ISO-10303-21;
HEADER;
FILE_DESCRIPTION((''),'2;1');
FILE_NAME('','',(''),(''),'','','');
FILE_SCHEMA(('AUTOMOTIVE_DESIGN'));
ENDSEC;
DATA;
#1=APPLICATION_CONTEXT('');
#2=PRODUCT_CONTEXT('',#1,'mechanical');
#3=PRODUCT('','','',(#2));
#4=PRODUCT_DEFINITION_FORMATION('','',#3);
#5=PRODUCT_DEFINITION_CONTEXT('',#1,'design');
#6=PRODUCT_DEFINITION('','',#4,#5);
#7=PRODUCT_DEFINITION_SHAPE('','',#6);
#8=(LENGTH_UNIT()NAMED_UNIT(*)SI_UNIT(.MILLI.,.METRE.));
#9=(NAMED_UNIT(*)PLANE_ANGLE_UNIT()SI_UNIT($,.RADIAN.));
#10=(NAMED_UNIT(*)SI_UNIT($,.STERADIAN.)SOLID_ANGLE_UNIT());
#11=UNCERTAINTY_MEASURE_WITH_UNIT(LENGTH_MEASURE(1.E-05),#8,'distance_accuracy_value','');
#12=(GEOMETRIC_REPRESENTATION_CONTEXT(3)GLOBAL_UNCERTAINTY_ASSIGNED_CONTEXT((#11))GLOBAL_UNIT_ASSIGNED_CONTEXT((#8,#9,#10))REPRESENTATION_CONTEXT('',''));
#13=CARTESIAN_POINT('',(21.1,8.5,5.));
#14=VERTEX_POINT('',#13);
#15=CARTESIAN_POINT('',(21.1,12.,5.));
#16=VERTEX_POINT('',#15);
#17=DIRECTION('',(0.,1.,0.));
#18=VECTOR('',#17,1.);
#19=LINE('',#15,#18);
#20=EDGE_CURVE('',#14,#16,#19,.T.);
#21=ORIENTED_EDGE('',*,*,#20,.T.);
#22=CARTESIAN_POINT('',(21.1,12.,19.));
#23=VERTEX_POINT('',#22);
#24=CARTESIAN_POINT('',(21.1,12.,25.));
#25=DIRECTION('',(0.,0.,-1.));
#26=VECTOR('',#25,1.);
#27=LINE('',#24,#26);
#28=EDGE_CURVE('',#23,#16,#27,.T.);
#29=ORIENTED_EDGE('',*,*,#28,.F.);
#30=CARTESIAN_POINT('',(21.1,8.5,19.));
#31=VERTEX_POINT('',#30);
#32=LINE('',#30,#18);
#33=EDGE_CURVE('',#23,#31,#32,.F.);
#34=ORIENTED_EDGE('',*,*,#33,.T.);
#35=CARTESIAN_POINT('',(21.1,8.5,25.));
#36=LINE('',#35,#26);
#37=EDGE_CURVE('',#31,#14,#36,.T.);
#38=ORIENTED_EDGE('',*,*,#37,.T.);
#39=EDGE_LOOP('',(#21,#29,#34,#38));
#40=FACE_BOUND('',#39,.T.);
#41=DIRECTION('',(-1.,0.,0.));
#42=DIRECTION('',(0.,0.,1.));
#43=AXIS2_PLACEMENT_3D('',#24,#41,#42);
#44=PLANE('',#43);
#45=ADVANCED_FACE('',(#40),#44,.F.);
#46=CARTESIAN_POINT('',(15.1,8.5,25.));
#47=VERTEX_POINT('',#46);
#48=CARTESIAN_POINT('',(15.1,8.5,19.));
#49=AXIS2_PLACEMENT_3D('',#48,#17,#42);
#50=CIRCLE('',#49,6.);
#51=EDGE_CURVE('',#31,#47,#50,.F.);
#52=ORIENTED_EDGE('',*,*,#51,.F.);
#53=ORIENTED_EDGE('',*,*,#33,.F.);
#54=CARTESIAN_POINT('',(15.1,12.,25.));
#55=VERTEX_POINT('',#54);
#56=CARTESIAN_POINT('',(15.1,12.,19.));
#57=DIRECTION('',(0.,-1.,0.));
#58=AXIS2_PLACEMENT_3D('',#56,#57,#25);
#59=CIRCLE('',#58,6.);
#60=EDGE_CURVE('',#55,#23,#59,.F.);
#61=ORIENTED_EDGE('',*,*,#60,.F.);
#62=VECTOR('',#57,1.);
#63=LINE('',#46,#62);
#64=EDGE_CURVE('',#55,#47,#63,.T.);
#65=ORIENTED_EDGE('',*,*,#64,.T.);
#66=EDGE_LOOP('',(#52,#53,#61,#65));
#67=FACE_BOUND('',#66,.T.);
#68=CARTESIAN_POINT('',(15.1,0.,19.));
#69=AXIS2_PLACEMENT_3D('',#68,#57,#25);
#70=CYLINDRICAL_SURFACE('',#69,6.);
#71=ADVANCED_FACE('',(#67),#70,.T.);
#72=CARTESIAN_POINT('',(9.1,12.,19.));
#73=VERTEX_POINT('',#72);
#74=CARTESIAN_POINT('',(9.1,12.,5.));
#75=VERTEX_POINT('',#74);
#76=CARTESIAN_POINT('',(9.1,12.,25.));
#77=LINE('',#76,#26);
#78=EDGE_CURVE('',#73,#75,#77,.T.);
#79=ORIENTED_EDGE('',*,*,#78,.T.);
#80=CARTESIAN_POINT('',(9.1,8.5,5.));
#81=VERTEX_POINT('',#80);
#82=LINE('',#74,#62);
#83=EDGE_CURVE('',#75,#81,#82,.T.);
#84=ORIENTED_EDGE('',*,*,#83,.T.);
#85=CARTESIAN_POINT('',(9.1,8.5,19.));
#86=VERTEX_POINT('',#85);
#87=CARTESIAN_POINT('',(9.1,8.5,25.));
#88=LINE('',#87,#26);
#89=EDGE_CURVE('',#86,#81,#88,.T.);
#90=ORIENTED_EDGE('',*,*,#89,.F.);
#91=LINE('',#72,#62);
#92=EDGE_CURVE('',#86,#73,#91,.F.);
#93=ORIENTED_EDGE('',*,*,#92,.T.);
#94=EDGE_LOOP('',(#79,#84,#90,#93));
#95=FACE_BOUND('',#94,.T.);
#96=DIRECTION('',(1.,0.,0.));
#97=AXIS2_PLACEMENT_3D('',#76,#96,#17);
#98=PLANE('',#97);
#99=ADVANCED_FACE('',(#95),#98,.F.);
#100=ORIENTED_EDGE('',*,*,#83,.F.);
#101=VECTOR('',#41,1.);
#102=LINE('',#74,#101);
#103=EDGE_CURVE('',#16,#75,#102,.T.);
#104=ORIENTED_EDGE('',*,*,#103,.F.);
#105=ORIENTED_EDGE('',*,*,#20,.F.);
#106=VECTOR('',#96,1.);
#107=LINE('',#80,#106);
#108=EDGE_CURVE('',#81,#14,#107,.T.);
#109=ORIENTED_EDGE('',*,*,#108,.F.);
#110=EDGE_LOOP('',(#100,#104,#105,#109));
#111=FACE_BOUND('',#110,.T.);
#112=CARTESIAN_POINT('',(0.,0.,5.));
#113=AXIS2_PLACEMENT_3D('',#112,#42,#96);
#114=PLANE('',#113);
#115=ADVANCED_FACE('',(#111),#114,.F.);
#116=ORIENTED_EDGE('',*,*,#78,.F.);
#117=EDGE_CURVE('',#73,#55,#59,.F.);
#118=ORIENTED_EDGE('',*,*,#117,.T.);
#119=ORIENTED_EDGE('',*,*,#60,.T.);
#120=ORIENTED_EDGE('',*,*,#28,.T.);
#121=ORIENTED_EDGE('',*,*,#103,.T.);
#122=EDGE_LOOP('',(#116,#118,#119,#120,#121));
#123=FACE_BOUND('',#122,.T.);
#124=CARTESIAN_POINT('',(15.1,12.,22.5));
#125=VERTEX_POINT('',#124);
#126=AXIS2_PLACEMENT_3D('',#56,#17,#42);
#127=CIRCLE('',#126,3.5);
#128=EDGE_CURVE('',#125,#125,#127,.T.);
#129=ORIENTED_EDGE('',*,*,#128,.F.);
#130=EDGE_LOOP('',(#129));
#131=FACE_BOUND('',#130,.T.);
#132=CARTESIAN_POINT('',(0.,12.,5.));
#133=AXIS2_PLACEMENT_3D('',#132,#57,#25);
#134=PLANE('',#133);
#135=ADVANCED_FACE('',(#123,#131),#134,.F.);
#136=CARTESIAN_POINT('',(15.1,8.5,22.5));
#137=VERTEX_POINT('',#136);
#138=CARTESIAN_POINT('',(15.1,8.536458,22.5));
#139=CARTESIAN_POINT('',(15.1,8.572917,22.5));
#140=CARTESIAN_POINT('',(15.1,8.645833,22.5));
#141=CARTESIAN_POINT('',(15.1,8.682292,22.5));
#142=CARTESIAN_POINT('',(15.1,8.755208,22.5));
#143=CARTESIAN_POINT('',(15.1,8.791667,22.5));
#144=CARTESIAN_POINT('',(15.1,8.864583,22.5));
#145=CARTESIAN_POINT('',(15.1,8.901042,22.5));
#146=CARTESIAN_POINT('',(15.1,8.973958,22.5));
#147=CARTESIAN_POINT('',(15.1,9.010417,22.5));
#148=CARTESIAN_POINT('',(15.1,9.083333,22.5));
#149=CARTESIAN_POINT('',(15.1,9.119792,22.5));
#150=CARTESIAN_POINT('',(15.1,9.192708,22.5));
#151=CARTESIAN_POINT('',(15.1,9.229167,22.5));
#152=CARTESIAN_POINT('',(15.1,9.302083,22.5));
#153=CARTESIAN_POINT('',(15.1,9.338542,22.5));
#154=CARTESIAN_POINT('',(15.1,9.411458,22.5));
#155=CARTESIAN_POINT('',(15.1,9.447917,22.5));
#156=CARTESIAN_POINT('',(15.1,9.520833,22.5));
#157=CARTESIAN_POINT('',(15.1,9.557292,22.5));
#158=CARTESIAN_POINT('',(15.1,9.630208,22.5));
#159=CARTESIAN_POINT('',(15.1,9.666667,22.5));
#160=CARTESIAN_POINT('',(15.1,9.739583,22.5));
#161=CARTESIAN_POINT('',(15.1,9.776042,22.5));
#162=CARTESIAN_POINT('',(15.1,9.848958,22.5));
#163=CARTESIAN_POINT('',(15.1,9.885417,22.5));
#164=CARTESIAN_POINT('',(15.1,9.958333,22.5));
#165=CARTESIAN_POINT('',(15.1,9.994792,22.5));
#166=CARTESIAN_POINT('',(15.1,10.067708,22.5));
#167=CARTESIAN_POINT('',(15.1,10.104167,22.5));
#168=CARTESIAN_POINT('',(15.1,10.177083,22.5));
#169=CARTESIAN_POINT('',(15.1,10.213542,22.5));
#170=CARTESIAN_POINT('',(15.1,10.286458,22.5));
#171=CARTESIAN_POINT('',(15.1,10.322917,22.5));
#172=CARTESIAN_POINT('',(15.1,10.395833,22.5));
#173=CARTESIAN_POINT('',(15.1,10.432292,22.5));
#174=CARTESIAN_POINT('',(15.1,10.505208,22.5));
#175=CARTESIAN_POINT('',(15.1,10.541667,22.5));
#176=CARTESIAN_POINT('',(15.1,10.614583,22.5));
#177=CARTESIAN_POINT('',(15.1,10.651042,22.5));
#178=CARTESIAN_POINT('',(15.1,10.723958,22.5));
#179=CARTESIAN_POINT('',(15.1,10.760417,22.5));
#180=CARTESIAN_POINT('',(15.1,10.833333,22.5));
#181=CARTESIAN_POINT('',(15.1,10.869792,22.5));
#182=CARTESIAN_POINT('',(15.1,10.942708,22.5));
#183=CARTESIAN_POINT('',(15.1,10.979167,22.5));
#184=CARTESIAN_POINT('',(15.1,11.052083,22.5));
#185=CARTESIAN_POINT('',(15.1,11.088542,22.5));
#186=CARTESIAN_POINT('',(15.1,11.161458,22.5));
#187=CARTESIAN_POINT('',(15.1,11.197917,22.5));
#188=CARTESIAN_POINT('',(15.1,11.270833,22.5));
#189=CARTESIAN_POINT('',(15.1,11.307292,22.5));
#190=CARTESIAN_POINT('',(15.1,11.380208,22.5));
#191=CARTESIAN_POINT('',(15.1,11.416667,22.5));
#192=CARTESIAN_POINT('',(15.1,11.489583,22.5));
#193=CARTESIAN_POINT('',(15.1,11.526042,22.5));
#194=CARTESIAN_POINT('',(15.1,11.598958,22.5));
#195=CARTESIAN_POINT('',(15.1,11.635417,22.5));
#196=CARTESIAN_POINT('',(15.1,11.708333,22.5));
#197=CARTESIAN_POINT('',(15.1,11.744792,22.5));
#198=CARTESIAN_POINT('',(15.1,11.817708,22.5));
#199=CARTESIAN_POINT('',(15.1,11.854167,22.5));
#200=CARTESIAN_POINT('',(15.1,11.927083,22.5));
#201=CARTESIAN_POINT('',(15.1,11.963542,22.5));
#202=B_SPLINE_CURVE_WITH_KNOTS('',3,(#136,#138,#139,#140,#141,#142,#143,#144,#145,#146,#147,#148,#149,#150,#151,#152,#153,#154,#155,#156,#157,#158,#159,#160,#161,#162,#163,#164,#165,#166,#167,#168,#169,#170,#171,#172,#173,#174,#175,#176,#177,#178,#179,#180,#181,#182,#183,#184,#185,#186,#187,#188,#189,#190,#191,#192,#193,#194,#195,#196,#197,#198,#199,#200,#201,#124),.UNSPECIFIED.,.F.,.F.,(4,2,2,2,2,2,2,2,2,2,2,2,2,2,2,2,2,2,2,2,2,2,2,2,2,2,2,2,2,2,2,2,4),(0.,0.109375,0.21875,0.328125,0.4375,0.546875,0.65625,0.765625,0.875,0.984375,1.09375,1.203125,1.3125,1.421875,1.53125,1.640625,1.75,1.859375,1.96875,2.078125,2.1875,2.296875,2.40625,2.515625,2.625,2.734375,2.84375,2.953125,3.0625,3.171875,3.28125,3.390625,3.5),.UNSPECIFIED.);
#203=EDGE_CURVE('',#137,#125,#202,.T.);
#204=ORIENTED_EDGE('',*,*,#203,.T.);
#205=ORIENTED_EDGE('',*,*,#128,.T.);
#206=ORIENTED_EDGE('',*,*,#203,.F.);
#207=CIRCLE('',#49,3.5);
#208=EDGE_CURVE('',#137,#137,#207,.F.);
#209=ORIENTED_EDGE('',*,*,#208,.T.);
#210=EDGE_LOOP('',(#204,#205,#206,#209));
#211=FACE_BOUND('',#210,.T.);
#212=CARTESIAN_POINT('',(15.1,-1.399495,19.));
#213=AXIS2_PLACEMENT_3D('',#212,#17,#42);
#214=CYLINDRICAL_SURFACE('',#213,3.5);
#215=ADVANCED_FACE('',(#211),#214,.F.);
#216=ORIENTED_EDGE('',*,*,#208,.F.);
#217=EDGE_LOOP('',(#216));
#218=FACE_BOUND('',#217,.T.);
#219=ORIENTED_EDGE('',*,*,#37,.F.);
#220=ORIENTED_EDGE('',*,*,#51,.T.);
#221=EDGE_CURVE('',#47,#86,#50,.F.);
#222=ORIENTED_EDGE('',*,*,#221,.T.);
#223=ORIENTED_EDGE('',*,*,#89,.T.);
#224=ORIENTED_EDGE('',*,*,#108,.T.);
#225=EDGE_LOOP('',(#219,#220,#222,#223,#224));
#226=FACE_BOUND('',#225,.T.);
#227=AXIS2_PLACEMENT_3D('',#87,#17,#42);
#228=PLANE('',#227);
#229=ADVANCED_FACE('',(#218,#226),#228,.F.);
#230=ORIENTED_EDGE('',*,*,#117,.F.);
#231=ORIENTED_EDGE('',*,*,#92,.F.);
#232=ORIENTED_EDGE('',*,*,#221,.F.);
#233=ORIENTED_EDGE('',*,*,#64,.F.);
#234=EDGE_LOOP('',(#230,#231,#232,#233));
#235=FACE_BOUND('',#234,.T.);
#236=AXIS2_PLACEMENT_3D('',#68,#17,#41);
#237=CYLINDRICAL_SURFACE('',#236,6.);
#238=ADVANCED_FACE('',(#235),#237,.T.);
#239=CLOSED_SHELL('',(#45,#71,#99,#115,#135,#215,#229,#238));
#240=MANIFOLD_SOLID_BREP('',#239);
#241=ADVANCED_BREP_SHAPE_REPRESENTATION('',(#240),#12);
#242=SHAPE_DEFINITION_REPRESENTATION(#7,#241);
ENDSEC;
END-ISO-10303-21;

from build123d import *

# Parameters (mm, degrees)
BOSS_EXTRUDE1_DEPTH     = 5
SKETCH2_W               = 3.5
SKETCH2_H               = 12
SKETCH2_W_2             = 3
BOSS_EXTRUDE2_DEPTH     = 20
SKETCH3_W               = 12
SKETCH3_H               = 3
SKETCH3_H_2             = 3.5
BOSS_EXTRUDE3_DEPTH     = 20
SKETCH4_W               = 5
SKETCH4_H               = 8
BOSS_EXTRUDE4_DEPTH     = 18
SKETCH5_R               = 3.5
CUT_EXTRUDE1_DEPTH      = 3.5
SKETCH6_R               = 3.5
CUT_EXTRUDE2_DEPTH      = 3.5
SKETCH7_R               = 1.625
CUT_EXTRUDE3_DEPTH      = 5
SKETCH8_R               = 2.5
CUT_EXTRUDE4_DEPTH      = 3
SKETCH9_R               = 2.5
CUT_EXTRUDE5_DEPTH      = 3
FILLET1_R               = 6
FILLET2_R               = 2
FILLET4_R               = 4
SURFACECUT2_START       = -20
SURFACECUT2_DEPTH       = 25
SURFACECUT2_START_2     = 5
SURFACECUT2_2_OUTLINE_W = 12
SURFACECUT2_2_OUTLINE_H = 3
SURFACECUT2_2_DEPTH     = 20


# Read off the part's stored shape, not the designer's step: SurfaceCut2
with BuildPart() as part:
    # Sketch1 → Boss-Extrude1 (new body)
    with BuildSketch(Plane.XY):
        Polygon((21.1, 0), (38.5, 0), (38.5, 12), (17.6, 12), (17.6, 26), (12.6, 26), (12.6, 12), (0, 12), (0, 0), (9.1, 0), (9.1, -26.5), (21.1, -26.5), align=None)
    extrude(amount=BOSS_EXTRUDE1_DEPTH)

    # Sketch2 → Boss-Extrude2 (add)
    with BuildSketch(Plane(origin=(0, 0, 0), x_dir=(-1, 0, 0), z_dir=(0, 0, -1))):
        with Locations((-1.75, 6)):
            Rectangle(SKETCH2_W, SKETCH2_H)
        with Locations((-37, 6)):
            Rectangle(SKETCH2_W_2, SKETCH2_H)
    extrude(amount=BOSS_EXTRUDE2_DEPTH)

    # Sketch3 → Boss-Extrude3 (add)
    with BuildSketch(Plane.XY.offset(5)):
        with Locations((15.1, -25)):
            Rectangle(SKETCH3_W, SKETCH3_H)
        with Locations((15.1, 10.25)):
            Rectangle(SKETCH3_W, SKETCH3_H_2)
    extrude(amount=BOSS_EXTRUDE3_DEPTH)

    # Sketch4 → Boss-Extrude4 (add)
    with BuildSketch(Plane(origin=(0, 0, 0), x_dir=(-1, 0, 0), z_dir=(0, 0, -1))):
        with Locations((-15.1, 22)):
            Rectangle(SKETCH4_W, SKETCH4_H)
    extrude(amount=BOSS_EXTRUDE4_DEPTH)

    # Sketch5 → Cut-Extrude1 (cut)
    with BuildSketch(Plane.ZY):
        with Locations((-14, 6)):
            Circle(SKETCH5_R)
    extrude(amount=-CUT_EXTRUDE1_DEPTH, mode=Mode.SUBTRACT)

    # Sketch6 → Cut-Extrude2 (cut)
    with BuildSketch(Plane(origin=(0, 12, 0), x_dir=(1, 0, 0), z_dir=(0, 1, 0))):
        with Locations(Location((15.1, -19, 0), (0, 0, 270))):
            Circle(SKETCH6_R)
    extrude(amount=-CUT_EXTRUDE2_DEPTH, mode=Mode.SUBTRACT)

    # Sketch7 → Cut-Extrude3 (cut)
    with BuildSketch(Plane.ZY.offset(-12.6)):
        with Locations((-14, 22)):
            Circle(SKETCH7_R)
    extrude(amount=-CUT_EXTRUDE3_DEPTH, mode=Mode.SUBTRACT)

    # Sketch8 → Cut-Extrude4 (cut)
    with BuildSketch(Plane.ZY.offset(-35.5)):
        with Locations((-14, 6)):
            Circle(SKETCH8_R)
    extrude(amount=-CUT_EXTRUDE4_DEPTH, mode=Mode.SUBTRACT)

    # Sketch9 → Cut-Extrude5 (cut)
    with BuildSketch(Plane(origin=(0, -23.5, 0), x_dir=(1, 0, 0), z_dir=(0, 1, 0))):
        with Locations(Location((15.1, -19, 0), (0, 0, 270))):
            Circle(SKETCH9_R)
    extrude(amount=-CUT_EXTRUDE5_DEPTH, mode=Mode.SUBTRACT)

    # Fillet1
    fillet1_edges = [part.edges().sort_by_distance(p)[0] for p in [
        (21.1, -25, 25),
        (9.1, -25, 25),
        (37, 0, -20),
        (37, 12, -20),
        (21.1, 10.25, 25),
        (9.1, 10.25, 25),
        (1.75, 0, -20),
        (1.75, 12, -20),
    ]]
    fillet(fillet1_edges, radius=FILLET1_R - 0.0001)  # a hair under: the kernel refuses the full size

    # Fillet2
    fillet2_edges = [part.edges().sort_by_distance(p)[0] for p in [
        (15.1, -26.5, 0),
        (38.5, 6, 5),
        (0, 6, 5),
        (15.1, 18, 0),
    ]]
    fillet(fillet2_edges, radius=FILLET2_R)

    # Fillet4
    fillet4_edges = [part.edges().sort_by_distance(p)[0] for p in [
        (15.1, 26, 5),
        (15.1, 26, -18),
        (15.1, 18, -18),
    ]]
    fillet(fillet4_edges, radius=FILLET4_R - 0.0001)  # a hair under: the kernel refuses the full size

    # SurfaceCut2 outline → SurfaceCut2 (cut)
    with BuildSketch(Plane.XY.offset(SURFACECUT2_START)):
        Polygon((0, 12), (0, 0), (9.1, 0), (9.1, -26.5), (21.1, -26.5), (21.1, 0), (38.5, 0), (38.5, 12), (17.6, 12), (17.6, 26), (12.6, 26), (12.6, 12), align=None)
    extrude(amount=SURFACECUT2_DEPTH, mode=Mode.SUBTRACT)

    # SurfaceCut2 2 outline → SurfaceCut2 2 (cut)
    with BuildSketch(Plane.XY.offset(SURFACECUT2_START_2)):
        with Locations((15.1, -25)):
            Rectangle(SURFACECUT2_2_OUTLINE_W, SURFACECUT2_2_OUTLINE_H)
    extrude(amount=SURFACECUT2_2_DEPTH, mode=Mode.SUBTRACT)


solid = part.part
